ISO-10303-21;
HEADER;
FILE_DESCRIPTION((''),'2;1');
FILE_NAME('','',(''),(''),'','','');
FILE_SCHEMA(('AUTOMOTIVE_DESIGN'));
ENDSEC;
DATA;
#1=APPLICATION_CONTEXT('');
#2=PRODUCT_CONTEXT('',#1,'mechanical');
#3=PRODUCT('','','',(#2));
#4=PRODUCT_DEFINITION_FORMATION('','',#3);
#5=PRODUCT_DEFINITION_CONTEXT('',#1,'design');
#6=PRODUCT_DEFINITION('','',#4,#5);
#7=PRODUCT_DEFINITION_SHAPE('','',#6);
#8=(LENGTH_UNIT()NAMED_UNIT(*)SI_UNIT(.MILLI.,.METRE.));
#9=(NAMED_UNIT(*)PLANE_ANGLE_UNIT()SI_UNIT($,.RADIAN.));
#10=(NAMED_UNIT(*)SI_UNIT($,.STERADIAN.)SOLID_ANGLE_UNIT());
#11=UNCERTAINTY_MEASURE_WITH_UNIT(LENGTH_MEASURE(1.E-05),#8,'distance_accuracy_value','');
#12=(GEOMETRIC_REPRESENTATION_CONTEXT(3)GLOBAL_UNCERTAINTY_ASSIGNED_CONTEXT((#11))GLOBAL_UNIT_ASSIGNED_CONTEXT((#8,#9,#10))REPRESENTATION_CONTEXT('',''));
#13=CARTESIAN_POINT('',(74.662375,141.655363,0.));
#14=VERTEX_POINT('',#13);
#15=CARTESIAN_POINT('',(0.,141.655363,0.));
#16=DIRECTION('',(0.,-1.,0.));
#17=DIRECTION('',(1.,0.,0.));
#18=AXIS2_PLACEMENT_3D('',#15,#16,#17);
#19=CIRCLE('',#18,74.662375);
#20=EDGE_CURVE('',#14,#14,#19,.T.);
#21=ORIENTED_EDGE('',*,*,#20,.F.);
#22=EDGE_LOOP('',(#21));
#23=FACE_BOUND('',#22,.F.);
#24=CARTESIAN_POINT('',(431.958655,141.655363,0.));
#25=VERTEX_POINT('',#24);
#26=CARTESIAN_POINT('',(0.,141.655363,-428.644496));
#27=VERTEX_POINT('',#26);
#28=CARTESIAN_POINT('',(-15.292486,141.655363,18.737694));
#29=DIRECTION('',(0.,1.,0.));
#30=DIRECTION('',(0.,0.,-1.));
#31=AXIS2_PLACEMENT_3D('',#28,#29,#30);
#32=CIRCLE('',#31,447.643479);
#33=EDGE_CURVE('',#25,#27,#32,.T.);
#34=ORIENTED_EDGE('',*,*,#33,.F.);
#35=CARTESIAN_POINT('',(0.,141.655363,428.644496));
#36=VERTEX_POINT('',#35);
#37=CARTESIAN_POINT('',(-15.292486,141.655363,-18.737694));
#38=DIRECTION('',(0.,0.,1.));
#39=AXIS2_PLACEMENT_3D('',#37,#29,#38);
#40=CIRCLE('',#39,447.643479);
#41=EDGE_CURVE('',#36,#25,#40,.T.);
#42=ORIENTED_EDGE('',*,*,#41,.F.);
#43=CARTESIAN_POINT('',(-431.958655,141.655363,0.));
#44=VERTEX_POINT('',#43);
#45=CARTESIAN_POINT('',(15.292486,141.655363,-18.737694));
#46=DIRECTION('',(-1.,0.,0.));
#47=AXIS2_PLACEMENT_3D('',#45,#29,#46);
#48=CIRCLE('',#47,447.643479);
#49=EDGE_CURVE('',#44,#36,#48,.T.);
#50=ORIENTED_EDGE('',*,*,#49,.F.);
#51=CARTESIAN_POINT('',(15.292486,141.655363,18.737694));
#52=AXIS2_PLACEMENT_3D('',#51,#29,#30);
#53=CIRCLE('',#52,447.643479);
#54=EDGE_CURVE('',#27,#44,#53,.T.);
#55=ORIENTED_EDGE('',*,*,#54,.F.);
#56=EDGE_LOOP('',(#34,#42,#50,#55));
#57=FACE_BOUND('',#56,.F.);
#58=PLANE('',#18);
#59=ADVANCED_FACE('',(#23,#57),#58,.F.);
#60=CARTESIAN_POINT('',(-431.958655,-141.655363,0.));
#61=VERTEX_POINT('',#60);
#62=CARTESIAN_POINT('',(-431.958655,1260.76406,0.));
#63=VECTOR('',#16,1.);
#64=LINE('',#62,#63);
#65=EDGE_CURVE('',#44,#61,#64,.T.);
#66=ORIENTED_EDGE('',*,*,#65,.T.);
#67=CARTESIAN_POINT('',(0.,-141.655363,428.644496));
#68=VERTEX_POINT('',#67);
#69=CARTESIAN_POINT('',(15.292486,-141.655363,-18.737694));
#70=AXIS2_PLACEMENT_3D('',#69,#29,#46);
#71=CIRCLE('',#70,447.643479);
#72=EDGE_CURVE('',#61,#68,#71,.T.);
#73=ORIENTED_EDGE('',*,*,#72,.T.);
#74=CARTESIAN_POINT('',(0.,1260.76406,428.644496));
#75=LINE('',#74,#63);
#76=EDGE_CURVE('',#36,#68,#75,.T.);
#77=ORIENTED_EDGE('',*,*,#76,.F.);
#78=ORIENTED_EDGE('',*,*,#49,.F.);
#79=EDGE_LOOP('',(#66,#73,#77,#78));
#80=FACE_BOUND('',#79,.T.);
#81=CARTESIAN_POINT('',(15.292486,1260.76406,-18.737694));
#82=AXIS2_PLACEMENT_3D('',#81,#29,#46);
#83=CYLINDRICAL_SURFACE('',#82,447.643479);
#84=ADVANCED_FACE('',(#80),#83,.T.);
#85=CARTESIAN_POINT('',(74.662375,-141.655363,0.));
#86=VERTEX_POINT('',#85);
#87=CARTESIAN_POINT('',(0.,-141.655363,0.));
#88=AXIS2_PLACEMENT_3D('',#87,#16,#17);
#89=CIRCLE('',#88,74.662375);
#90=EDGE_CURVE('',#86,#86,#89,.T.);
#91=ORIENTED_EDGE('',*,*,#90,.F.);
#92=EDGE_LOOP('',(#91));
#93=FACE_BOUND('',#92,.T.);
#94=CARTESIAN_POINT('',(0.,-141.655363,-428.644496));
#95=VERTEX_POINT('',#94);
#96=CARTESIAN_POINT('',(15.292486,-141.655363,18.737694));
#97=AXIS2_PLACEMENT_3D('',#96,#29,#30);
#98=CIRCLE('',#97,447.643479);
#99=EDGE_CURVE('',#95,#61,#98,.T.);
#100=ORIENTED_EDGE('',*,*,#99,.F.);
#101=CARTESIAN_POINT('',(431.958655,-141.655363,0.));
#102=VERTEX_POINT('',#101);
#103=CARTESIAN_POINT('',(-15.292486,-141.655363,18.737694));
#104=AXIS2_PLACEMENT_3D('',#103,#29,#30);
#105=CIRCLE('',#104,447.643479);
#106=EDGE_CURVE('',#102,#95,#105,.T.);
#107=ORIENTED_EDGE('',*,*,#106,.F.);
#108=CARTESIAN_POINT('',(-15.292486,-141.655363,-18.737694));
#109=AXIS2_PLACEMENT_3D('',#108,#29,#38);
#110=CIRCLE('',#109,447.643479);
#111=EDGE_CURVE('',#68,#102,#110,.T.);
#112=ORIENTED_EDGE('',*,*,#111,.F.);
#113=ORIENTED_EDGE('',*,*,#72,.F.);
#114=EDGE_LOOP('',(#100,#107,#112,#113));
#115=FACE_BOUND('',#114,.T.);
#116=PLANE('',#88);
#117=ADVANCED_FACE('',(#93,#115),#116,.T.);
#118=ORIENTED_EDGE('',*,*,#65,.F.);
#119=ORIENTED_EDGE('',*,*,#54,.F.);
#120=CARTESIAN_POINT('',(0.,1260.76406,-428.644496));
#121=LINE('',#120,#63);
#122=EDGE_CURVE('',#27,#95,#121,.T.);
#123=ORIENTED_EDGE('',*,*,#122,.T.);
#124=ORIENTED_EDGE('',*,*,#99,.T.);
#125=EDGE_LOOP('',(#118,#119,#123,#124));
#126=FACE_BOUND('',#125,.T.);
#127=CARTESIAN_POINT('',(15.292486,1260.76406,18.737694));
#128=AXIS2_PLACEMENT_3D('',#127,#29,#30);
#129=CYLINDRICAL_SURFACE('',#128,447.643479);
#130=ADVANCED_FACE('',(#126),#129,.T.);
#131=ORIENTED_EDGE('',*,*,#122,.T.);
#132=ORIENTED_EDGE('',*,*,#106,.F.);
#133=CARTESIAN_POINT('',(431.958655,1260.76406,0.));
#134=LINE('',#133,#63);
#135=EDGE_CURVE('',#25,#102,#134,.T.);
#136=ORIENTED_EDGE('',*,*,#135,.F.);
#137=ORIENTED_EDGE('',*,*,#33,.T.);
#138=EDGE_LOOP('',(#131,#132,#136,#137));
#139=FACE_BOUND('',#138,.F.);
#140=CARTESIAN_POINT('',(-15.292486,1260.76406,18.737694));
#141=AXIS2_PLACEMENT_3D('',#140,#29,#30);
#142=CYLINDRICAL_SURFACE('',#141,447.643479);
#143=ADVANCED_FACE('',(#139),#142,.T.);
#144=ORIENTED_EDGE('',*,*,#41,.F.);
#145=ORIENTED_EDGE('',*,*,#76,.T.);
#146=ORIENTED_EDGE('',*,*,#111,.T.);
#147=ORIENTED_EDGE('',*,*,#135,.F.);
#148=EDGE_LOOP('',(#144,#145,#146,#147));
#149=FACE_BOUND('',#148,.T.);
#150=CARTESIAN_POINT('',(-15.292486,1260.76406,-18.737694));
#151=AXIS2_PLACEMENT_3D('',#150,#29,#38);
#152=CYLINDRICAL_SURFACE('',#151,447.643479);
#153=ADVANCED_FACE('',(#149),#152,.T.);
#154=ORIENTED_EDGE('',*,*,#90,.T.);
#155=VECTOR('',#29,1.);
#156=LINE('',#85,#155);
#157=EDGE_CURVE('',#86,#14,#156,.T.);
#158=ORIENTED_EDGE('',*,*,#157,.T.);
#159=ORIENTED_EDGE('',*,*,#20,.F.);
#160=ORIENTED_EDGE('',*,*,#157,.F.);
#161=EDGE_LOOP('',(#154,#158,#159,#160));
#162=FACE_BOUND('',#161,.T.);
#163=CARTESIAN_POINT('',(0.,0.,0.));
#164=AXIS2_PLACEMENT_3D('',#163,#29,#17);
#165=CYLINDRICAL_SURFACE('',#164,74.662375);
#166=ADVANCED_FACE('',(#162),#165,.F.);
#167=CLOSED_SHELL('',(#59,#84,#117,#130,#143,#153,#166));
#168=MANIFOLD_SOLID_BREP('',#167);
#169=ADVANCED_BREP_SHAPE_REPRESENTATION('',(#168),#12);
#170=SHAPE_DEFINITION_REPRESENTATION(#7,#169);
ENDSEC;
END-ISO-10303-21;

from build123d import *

# Parameters (mm, degrees)
F1_W        = 864.7019863129
F1_H        = 857.8115701675
F1_R        = 74.6623748118
F2_DEPTH    = 141.6553631425
F3_T1_DEPTH = 2521.5281199611


# Not quite as in the source:
# - a fillet or chamfer that OpenCascade refuses, or shapes differently, is made with other operations: its cross-section is extruded or revolved along the edge and cut away or added


with BuildPart() as f2:
    # F1 (on face) → F2 (new body, symmetric)
    with BuildSketch(Plane.XZ):
        Rectangle(F1_W, F1_H)
        Circle(F1_R, mode=Mode.SUBTRACT)
    extrude(amount=F2_DEPTH, both=True)

    # F3: fillet of radius 447.6434787352 on 4 edges, made by hand

    # F3_s2 → F3_t1 (cut)
    with BuildSketch(Plane.XZ.offset(-1260.7640599805)):
        with BuildLine():
            ThreePointArc((-15.2924855788, 428.9057850838), (301.2392537888, 297.7940457162), (432.3509931564, -18.7376936514))
            Line((432.3509931564, -18.7376936514), (432.3509931564, 428.9057850838))
            Line((432.3509931564, 428.9057850838), (-15.2924855788, 428.9057850838))
        make_face()
        with BuildLine():
            ThreePointArc((-15.2924855788, -428.9057850838), (301.2392537888, -297.7940457162), (432.3509931564, 18.7376936514))
            Line((432.3509931564, 18.7376936514), (432.3509931564, -428.9057850838))
            Line((432.3509931564, -428.9057850838), (-15.2924855788, -428.9057850838))
        make_face()
        with BuildLine():
            ThreePointArc((15.2924855788, -428.9057850838), (-301.2392537888, -297.7940457162), (-432.3509931564, 18.7376936514))
            Line((-432.3509931564, 18.7376936514), (-432.3509931564, -428.9057850838))
            Line((-432.3509931564, -428.9057850838), (15.2924855788, -428.9057850838))
        make_face()
        with BuildLine():
            ThreePointArc((-432.3509931564, -18.7376936514), (-301.2392537888, 297.7940457162), (15.2924855788, 428.9057850838))
            Line((15.2924855788, 428.9057850838), (-432.3509931564, 428.9057850838))
            Line((-432.3509931564, 428.9057850838), (-432.3509931564, -18.7376936514))
        make_face()
    extrude(amount=F3_T1_DEPTH, mode=Mode.SUBTRACT)


solid = f2.part
